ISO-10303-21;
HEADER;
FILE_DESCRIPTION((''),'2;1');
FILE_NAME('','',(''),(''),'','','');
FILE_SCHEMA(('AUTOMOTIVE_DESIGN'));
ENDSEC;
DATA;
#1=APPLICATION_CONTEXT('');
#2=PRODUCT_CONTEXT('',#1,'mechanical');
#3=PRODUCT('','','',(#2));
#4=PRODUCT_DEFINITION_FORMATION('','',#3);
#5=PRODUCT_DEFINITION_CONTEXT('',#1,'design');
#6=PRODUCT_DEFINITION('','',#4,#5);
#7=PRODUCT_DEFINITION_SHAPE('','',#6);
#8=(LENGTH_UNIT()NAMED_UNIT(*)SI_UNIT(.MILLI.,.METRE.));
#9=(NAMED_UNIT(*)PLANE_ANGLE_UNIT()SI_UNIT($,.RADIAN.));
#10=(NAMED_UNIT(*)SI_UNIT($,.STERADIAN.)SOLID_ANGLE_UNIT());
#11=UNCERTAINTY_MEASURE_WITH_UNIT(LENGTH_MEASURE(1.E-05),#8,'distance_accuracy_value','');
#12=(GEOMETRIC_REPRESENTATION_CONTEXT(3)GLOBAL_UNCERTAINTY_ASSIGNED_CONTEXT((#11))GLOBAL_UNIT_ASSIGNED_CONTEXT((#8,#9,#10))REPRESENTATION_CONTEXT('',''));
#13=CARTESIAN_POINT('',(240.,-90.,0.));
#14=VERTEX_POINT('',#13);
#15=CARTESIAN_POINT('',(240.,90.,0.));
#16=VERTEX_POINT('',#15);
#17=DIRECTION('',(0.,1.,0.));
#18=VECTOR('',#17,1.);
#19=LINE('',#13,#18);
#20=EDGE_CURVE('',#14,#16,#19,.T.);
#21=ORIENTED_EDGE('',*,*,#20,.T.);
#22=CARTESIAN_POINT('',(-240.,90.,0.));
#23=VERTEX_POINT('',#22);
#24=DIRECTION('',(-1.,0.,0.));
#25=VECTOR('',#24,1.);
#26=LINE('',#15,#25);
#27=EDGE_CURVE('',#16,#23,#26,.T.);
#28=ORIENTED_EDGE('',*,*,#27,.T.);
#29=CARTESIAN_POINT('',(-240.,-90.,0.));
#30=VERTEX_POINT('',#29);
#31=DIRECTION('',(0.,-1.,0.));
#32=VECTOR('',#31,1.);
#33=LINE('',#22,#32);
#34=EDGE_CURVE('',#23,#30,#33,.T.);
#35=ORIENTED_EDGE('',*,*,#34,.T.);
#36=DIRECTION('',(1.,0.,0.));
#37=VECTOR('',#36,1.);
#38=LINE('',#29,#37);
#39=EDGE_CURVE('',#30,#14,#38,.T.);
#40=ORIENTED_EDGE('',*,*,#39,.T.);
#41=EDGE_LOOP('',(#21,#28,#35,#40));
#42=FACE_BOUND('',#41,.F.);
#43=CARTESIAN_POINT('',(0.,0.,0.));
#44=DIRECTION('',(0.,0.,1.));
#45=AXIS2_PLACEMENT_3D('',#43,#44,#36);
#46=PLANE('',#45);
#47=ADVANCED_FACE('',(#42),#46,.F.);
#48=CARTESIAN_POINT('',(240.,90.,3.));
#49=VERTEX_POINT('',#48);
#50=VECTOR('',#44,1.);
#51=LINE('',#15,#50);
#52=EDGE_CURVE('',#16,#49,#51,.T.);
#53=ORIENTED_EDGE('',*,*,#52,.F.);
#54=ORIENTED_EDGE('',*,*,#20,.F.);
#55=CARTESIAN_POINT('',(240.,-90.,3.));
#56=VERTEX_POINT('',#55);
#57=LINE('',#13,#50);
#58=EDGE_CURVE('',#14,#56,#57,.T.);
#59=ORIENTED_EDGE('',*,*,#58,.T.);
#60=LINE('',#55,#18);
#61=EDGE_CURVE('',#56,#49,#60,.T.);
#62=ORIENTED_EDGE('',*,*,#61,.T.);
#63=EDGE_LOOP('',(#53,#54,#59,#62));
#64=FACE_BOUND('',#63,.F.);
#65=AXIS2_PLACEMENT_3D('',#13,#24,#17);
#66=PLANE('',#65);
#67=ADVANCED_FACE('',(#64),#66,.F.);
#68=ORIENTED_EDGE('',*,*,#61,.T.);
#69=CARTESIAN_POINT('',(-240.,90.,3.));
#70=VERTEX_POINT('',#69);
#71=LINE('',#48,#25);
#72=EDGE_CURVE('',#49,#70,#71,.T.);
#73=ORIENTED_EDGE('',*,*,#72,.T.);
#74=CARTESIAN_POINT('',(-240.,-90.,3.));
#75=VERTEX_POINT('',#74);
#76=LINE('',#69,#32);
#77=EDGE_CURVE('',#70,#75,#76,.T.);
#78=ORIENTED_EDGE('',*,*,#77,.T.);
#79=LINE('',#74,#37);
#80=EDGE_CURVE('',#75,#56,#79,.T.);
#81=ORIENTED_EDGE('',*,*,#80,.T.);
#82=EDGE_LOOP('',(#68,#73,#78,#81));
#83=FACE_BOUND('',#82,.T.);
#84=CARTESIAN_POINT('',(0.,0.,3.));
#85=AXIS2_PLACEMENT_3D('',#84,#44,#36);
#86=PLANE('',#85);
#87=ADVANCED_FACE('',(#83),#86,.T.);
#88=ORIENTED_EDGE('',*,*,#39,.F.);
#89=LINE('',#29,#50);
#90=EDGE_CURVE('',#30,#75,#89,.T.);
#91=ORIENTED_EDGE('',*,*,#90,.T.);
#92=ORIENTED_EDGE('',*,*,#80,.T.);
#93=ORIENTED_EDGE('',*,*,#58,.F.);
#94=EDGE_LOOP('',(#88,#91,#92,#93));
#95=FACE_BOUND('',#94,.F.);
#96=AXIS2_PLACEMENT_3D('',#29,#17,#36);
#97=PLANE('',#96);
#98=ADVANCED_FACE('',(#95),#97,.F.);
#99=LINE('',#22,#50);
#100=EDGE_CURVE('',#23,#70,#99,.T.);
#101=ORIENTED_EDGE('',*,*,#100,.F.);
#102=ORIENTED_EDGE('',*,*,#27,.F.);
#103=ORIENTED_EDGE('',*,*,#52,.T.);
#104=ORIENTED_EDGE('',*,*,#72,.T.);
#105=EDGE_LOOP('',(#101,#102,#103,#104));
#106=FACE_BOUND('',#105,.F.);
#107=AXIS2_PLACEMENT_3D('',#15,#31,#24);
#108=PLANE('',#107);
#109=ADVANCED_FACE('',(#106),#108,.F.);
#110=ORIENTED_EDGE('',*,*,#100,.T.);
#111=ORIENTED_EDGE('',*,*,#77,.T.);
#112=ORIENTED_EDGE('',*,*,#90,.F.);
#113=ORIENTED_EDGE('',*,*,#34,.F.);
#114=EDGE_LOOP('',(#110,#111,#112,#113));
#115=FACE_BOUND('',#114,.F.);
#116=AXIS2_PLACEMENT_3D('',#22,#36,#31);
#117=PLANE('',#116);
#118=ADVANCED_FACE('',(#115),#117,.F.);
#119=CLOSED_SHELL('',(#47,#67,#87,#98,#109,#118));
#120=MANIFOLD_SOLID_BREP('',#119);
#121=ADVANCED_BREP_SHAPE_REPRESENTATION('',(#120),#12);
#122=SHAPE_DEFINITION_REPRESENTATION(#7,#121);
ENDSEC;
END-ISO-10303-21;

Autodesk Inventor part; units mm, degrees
ref_plane "YZ Plane" through (0, 0, 0) normal (1, 0, 0) x (0, 1, 0)
ref_plane "XZ Plane" through (0, 0, 0) normal (0, 1, 0) x (-1, 0, 0)
ref_plane "XY Plane" through (0, 0, 0) normal (0, 0, 1) x (1, 0, 0)
sketch "Sketch1" plane through (0, 0, 0) normal (0, 0, 1) x (1, 0, 0)
  line L0 (-240, -90) -> (240, -90)
  line L1 (240, -90) -> (240, 90)
  line L2 (240, 90) -> (-240, 90)
  line L3 (-240, 90) -> (-240, -90)
  line L4 (-240, -90) -> (240, 90) construction
  line L5 (240, -90) -> (-240, 90) construction
  point P0 (0, 0)
  dimension "d0" = 480
  dimension "d1" = 180
extrude "Plate1" add sketch "Sketch1" along normal blind 3
sketch "Sketch2" plane through (0, 0, 0) normal (0, 0, -1) x (-1, 0, 0)
  line L0 (-220, 70) -> (-20, 70) construction
  line L1 (-20, 70) -> (-20, 50) construction
  line L2 (-20, 50) -> (-220, 50) construction
  line L3 (-220, 50) -> (-220, 70) construction
  line L4 (-240, 90) -> (240, 90) projected
  line L5 (-240, -90) -> (-240, 90) projected
  point P0 (0, 0)
  point P1 (-220, 60)
  dimension "d6" = 200
  dimension "d7" = 20
  dimension "d8" = 20
  dimension "d9" = 20
mark "Mark1"
equation "\"d2\" = Thickness"
equation "\"BendReliefWidth\" = Thickness"
equation "\"BendReliefDepth\" = 0.5 * Thickness"
equation "\"CornerReliefSize\" = 4 * Thickness"
equation "\"MinimumRemnant\" = 2 * Thickness"
equation "\"TransitionRadius\" = BendRadius"
equation "\"JacobiRadiusSize\" = BendRadius"
equation "\"GapSize\" = Thickness"
equation "\"Thickness\" = 3"
equation "\"BendRadius\" = 2.75"
properties part number "TRM 038 facr wall" material "AISI 304"
